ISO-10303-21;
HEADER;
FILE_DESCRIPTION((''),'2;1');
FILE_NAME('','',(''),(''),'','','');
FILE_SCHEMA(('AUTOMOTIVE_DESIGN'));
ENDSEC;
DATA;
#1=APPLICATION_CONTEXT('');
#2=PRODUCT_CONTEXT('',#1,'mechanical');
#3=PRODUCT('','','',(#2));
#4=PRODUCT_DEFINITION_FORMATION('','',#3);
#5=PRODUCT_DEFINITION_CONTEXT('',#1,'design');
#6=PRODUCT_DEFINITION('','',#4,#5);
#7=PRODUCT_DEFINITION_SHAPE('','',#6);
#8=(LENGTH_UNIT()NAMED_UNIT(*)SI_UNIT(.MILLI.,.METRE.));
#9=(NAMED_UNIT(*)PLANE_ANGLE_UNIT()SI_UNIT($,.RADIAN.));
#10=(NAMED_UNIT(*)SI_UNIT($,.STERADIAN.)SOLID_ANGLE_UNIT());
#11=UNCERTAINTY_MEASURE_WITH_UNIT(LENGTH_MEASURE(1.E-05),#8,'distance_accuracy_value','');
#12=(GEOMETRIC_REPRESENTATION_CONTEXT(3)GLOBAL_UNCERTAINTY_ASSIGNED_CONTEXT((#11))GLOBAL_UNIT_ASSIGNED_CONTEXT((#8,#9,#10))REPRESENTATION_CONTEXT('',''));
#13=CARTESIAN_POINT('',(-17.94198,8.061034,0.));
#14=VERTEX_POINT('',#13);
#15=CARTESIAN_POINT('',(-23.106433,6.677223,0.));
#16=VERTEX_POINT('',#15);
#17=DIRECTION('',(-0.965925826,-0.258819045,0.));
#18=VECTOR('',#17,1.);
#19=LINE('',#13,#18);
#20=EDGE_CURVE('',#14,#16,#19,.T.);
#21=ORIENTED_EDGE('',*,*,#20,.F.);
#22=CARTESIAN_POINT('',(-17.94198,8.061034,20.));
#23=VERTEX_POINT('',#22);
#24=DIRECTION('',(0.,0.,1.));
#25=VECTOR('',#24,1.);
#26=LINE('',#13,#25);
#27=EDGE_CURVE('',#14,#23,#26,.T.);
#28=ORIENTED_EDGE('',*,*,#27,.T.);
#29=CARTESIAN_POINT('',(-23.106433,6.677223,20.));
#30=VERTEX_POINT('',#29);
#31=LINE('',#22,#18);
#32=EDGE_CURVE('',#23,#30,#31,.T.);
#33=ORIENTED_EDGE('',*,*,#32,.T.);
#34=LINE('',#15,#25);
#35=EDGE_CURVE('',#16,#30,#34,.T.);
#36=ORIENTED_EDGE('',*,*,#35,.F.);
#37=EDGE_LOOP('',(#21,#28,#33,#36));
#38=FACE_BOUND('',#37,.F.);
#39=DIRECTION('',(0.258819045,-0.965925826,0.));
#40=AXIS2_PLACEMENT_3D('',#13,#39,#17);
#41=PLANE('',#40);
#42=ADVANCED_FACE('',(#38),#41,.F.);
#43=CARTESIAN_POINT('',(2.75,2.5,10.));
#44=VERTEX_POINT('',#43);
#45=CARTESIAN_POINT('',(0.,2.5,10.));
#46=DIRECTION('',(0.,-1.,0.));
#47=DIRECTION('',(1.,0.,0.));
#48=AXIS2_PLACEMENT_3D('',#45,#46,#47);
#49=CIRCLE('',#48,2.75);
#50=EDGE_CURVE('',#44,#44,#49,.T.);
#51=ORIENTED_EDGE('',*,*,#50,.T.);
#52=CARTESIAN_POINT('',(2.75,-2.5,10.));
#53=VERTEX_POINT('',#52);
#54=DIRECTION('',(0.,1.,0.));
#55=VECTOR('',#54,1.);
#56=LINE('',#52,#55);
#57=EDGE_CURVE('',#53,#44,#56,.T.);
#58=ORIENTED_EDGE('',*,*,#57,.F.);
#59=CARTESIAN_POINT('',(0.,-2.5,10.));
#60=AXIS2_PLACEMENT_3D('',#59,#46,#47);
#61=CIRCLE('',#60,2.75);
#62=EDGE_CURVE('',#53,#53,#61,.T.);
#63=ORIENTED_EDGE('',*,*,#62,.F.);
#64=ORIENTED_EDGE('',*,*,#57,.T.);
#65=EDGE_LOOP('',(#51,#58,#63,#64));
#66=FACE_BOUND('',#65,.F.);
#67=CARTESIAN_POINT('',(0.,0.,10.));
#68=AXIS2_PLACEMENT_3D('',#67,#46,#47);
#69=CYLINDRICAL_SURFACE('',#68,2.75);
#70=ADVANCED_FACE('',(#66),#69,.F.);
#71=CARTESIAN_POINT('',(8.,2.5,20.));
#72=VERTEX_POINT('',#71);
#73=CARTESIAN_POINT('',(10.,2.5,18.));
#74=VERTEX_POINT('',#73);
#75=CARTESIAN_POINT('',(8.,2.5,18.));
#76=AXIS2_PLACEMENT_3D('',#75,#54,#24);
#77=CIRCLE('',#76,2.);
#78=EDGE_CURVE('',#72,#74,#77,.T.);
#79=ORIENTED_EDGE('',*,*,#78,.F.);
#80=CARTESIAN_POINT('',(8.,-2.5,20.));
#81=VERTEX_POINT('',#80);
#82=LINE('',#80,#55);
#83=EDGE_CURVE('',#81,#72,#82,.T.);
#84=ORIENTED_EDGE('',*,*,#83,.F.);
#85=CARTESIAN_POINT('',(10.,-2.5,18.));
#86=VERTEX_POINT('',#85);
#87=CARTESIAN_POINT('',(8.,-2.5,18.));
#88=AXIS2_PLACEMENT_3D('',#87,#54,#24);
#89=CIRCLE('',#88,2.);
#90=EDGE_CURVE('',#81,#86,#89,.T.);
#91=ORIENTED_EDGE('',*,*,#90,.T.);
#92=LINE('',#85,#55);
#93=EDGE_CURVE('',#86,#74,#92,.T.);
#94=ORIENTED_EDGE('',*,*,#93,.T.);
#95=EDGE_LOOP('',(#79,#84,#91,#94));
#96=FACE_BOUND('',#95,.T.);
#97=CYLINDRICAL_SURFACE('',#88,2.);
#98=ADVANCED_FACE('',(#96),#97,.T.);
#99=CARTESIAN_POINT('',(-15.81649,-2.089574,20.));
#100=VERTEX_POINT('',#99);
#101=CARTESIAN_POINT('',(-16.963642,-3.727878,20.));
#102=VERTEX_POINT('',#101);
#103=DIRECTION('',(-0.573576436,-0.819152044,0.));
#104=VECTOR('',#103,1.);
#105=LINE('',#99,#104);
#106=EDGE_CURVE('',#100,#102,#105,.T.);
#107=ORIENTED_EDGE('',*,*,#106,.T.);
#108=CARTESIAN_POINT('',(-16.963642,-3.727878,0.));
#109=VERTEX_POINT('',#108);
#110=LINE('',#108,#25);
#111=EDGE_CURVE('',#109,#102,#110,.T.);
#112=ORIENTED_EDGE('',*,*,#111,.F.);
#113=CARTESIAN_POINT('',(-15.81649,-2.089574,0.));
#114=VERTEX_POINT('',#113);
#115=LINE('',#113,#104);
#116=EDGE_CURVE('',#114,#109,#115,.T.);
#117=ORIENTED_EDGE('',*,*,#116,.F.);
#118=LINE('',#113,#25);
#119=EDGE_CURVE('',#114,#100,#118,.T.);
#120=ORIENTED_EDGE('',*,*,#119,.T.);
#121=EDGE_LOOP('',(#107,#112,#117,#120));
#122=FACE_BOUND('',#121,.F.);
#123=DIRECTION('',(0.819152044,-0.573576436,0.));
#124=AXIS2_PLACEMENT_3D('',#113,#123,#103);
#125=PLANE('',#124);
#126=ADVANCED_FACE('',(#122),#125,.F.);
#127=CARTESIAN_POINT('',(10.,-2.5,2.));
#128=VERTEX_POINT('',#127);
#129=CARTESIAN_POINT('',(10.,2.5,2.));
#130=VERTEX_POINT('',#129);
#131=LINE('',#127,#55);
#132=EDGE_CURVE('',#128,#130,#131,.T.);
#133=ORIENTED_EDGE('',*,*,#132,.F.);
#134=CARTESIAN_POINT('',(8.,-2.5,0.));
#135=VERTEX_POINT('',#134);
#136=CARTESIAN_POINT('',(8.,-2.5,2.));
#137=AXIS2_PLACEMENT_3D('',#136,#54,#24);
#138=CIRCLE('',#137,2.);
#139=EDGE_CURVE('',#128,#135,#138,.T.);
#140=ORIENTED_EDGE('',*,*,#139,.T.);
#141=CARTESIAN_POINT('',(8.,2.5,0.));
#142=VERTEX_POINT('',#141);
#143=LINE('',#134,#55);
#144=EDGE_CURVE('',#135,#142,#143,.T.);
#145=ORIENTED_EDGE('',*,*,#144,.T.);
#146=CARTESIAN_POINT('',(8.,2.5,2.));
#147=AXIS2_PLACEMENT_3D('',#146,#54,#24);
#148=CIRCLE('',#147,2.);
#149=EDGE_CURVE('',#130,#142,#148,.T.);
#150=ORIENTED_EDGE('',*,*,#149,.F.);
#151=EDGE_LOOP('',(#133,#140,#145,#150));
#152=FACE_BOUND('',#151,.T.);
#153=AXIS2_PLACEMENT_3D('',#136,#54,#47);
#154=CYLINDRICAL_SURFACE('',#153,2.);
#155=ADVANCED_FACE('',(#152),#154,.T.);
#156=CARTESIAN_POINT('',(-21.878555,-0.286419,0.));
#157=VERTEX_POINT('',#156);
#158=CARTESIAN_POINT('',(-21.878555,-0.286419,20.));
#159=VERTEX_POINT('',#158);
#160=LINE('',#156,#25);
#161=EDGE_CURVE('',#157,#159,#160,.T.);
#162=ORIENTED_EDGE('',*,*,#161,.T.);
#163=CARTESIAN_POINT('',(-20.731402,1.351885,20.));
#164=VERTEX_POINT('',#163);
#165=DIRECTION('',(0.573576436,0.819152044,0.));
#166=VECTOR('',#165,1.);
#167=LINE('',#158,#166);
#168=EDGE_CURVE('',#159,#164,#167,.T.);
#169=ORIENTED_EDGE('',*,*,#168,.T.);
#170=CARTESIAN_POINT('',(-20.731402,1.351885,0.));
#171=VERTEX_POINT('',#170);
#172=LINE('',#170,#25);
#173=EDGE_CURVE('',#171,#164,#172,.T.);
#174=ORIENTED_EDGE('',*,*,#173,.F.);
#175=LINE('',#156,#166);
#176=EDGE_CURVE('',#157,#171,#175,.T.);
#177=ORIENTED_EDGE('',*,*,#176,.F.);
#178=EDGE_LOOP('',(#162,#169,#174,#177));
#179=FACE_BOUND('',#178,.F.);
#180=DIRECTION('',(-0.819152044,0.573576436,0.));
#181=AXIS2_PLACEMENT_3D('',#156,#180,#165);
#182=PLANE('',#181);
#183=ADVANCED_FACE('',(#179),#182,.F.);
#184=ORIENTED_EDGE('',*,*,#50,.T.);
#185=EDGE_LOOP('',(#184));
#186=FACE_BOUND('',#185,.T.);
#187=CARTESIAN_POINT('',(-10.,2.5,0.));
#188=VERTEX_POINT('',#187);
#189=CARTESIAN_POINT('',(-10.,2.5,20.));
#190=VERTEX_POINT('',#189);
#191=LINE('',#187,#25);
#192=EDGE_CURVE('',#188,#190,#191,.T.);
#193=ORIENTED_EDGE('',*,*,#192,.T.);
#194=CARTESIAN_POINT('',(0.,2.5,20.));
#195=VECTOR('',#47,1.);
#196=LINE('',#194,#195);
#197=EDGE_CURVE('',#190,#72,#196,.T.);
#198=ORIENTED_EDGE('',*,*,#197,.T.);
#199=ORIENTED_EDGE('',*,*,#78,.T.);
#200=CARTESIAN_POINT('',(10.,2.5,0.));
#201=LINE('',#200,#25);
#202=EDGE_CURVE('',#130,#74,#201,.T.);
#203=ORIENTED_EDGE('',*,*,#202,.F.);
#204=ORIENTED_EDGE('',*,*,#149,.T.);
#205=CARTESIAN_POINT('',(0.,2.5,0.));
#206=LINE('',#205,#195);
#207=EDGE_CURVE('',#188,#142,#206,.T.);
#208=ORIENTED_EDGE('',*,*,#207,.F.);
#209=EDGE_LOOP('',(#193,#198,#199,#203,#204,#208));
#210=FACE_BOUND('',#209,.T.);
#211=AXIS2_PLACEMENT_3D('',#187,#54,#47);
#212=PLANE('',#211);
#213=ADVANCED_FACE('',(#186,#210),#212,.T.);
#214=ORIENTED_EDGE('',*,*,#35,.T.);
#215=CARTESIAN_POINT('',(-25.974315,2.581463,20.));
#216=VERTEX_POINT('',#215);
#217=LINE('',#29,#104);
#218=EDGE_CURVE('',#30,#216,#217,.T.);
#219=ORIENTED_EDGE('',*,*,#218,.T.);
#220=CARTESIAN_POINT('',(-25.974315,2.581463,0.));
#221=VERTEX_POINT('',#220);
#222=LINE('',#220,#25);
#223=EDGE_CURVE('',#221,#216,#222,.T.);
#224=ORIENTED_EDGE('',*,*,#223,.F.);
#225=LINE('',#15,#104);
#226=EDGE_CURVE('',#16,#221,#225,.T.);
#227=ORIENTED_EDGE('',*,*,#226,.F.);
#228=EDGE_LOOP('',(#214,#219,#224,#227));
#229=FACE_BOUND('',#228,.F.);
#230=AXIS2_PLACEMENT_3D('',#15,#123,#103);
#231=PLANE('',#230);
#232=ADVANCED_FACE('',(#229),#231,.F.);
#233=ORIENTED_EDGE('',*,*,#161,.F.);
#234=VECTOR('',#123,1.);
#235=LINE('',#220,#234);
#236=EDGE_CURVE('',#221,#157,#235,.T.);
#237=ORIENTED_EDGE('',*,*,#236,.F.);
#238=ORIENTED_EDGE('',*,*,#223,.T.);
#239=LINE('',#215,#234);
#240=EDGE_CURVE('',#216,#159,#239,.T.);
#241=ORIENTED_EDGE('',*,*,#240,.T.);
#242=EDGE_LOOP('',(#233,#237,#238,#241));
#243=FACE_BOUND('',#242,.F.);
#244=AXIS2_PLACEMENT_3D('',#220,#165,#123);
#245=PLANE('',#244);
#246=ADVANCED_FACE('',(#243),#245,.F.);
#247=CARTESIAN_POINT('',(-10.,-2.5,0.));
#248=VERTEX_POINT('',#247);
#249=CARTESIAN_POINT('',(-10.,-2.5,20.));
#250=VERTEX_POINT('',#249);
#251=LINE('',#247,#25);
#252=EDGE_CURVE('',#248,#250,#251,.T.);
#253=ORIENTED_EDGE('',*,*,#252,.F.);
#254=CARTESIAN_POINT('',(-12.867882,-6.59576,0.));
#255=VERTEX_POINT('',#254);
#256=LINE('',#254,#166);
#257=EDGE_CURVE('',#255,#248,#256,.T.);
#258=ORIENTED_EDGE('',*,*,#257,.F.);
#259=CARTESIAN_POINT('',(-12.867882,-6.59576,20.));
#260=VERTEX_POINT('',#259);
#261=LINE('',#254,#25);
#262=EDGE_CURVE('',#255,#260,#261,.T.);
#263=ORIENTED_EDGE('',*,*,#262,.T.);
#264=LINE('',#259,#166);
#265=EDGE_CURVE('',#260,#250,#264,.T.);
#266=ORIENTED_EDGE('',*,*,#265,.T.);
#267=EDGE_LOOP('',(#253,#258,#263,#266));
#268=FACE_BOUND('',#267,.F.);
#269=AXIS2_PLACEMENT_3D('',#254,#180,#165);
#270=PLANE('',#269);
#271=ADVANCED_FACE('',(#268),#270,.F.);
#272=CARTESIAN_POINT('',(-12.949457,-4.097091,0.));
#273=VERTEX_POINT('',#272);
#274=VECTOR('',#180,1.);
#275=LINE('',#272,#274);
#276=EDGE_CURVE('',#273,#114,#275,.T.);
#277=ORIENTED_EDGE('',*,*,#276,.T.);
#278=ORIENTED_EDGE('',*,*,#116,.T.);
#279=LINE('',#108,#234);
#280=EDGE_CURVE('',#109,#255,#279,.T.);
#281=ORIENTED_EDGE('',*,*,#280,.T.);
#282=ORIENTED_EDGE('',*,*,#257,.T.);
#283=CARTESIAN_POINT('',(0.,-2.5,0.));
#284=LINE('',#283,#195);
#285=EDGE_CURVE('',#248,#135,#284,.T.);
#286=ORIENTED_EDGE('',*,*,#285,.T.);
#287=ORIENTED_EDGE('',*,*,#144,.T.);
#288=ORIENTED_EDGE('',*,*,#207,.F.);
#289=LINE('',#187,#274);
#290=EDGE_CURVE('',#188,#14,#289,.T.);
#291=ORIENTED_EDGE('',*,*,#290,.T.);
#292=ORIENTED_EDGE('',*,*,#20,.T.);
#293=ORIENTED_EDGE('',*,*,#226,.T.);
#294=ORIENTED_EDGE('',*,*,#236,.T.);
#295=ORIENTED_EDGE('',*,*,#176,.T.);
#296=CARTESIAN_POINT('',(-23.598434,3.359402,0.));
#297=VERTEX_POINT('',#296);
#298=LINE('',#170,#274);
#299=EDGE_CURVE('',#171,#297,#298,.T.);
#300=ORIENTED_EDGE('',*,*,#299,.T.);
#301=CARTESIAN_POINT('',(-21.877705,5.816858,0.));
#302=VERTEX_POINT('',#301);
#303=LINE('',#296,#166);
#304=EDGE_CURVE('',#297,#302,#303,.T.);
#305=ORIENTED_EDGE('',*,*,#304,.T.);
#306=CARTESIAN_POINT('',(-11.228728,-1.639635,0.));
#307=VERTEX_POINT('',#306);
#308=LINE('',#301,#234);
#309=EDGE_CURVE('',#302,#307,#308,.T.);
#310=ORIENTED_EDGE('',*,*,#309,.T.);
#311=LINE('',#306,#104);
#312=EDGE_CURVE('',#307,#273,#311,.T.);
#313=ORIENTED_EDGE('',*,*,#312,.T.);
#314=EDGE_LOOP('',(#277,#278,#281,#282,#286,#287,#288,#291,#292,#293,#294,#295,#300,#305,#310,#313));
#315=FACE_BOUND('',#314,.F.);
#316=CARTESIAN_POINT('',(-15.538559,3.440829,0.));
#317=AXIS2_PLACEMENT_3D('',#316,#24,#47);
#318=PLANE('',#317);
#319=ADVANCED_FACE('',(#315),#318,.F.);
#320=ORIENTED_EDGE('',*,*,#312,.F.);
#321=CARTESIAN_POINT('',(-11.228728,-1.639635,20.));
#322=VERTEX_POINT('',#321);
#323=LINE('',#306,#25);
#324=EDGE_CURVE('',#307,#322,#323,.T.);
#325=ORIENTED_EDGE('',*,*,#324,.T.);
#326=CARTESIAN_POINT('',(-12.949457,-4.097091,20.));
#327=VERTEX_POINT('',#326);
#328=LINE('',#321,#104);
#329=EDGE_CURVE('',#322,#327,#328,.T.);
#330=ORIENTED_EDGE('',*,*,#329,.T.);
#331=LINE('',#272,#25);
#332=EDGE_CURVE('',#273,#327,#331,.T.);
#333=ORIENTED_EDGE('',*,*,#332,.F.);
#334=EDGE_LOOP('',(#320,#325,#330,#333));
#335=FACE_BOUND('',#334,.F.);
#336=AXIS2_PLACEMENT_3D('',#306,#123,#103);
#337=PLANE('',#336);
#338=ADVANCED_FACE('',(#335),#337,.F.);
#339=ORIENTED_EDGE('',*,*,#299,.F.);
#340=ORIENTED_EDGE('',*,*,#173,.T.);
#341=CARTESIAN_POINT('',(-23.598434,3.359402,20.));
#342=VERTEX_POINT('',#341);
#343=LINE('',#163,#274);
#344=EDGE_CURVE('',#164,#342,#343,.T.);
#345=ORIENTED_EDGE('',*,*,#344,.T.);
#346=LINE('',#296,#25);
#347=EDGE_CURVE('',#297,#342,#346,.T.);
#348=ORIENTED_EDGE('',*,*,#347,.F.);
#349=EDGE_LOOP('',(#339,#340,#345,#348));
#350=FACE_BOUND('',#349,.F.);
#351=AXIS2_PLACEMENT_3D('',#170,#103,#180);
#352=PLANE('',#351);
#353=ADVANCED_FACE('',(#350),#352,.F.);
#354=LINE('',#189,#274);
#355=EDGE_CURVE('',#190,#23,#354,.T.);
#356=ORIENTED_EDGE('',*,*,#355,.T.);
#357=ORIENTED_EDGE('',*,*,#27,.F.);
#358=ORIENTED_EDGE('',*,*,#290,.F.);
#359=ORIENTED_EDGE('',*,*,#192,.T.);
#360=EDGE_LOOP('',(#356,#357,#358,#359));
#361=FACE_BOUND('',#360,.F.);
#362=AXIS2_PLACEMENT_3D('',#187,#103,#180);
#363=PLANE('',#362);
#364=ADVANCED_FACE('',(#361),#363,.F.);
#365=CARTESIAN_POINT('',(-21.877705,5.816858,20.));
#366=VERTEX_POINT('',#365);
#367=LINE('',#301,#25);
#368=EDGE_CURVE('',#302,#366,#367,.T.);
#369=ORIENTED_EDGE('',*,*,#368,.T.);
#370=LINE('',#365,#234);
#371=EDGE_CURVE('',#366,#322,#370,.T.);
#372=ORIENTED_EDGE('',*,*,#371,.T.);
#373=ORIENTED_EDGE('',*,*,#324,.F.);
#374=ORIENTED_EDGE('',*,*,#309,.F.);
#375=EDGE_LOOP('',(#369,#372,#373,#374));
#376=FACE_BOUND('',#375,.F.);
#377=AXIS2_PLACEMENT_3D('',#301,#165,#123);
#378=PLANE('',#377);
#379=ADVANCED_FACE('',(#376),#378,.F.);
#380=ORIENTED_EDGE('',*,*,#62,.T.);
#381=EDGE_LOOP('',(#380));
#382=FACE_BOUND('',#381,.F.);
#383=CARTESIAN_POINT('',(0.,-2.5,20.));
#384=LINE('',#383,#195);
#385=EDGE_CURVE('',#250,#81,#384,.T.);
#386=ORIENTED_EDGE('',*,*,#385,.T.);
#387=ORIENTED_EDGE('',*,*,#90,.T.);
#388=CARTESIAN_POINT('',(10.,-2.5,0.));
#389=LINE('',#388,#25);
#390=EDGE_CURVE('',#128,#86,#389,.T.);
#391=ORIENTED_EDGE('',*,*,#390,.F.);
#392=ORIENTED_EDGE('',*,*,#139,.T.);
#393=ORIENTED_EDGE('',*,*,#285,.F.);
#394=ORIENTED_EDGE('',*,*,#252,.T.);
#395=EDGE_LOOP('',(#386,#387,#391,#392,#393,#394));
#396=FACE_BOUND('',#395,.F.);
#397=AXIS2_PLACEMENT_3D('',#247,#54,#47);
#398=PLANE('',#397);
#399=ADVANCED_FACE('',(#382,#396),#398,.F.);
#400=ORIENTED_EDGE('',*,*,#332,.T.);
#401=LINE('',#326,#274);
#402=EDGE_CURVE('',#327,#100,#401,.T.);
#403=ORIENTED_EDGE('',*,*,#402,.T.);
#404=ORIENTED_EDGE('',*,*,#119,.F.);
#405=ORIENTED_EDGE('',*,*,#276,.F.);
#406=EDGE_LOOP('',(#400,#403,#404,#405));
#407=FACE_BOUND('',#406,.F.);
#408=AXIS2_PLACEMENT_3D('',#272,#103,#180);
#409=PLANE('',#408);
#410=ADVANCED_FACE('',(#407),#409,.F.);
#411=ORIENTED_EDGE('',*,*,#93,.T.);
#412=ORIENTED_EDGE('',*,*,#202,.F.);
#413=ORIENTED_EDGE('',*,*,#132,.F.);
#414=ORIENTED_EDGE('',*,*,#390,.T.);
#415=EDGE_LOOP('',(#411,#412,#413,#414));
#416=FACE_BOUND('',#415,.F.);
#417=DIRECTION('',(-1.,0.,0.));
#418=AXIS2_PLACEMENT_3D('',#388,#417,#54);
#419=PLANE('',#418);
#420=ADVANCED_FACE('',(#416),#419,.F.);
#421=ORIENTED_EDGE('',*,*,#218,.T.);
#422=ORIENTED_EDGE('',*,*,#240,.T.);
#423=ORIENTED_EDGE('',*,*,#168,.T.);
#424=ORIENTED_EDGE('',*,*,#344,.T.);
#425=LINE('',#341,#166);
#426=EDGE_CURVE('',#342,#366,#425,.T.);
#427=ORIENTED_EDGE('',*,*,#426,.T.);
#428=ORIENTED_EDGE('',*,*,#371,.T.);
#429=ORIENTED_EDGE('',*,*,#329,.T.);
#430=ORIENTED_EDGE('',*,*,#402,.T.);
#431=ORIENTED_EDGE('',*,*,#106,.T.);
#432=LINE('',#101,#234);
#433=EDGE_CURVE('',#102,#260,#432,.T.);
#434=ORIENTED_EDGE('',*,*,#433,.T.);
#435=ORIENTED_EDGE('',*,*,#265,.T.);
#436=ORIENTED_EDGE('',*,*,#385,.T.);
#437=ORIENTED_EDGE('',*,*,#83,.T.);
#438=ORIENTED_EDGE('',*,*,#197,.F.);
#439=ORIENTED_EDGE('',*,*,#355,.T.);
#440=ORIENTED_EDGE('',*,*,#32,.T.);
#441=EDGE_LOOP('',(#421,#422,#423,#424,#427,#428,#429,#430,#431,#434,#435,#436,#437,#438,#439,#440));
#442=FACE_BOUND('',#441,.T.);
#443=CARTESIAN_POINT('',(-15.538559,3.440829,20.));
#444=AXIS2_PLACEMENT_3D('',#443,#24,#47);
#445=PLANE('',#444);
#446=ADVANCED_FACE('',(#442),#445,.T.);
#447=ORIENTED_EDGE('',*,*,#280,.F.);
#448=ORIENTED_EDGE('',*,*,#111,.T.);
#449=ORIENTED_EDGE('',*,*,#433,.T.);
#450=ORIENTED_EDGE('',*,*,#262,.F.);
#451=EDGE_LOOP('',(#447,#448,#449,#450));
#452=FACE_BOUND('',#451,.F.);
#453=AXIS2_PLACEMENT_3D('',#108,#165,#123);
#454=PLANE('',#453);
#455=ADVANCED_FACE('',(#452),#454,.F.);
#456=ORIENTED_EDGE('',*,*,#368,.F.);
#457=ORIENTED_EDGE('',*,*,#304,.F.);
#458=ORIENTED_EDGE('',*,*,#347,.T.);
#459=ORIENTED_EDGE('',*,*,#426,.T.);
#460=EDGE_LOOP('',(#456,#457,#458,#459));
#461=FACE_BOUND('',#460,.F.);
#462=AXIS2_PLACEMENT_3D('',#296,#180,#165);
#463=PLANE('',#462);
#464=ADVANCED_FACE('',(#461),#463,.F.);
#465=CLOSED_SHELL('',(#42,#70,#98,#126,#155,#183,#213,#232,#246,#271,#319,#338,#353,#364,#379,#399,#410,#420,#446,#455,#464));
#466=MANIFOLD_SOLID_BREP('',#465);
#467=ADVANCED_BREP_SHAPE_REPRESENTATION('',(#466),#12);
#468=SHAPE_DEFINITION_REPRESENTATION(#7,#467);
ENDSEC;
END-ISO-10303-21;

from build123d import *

# Parameters (mm, degrees)
F0_W      = 20
F0_H      = 5
F1_DEPTH  = 20
F2_R      = 2.75
F3_DEPTH  = 6.3
F3_FACE_R = 2.75
F4_DEPTH  = 6.5967602214
F5_R      = 2


# Not quite as in the source:
# - a feature names something its author has since deleted; it is built from what else it names


with BuildPart() as f1:
    # F0 (on Top) → F1 (new body)
    with BuildSketch(Plane.XY):
        Polygon((-10, -2.5), (-10, 2.5), (-17.9419796384, 8.0610340111), (-23.1064327086, 6.6772229816), (-21.8777046422, 5.8168583271), (-11.2287280664, -1.6396353455), align=None)
        Rectangle(F0_W, F0_H)
        Polygon((-21.8777046422, 5.8168583271), (-23.1064327086, 6.6772229816), (-25.9743148904, 2.5814627602), (-21.8785546689, -0.2864194216), (-20.7314017962, 1.351884667), (-23.5984339512, 3.3594021942), align=None)
        Polygon((-12.8678821818, -6.5957602214), (-10, -2.5), (-11.2287280664, -1.6396353455), (-12.9494573755, -4.0970914783), (-15.8164895305, -2.0895739511), (-16.9636424032, -3.7278780397), align=None)
    extrude(amount=F1_DEPTH)

    # F2 (on Front) → F3 (cut)
    with BuildSketch(Plane.XZ):
        with Locations((0, 10)):
            Circle(F2_R)
    extrude(amount=-F3_DEPTH, mode=Mode.SUBTRACT)

    # F2 (on Front) + F3_face (on face) → F4 (cut, through all)
    with BuildSketch(Plane.XZ):
        with Locations((0, 10)):
            Circle(F2_R)
    with BuildSketch(Plane(origin=(0, 0, 10), x_dir=(-1, 0, 0), z_dir=(0, 1, 0))):
        Circle(F3_FACE_R)
    extrude(amount=F4_DEPTH, dir=(0, -1, 0), mode=Mode.SUBTRACT)

    # F5
    f5_edges = [f1.edges().sort_by_distance(p)[0] for p in [
        (10, 0, 20),
        (10, 0, 0),
    ]]
    fillet(f5_edges, radius=F5_R)


solid = f1.part
